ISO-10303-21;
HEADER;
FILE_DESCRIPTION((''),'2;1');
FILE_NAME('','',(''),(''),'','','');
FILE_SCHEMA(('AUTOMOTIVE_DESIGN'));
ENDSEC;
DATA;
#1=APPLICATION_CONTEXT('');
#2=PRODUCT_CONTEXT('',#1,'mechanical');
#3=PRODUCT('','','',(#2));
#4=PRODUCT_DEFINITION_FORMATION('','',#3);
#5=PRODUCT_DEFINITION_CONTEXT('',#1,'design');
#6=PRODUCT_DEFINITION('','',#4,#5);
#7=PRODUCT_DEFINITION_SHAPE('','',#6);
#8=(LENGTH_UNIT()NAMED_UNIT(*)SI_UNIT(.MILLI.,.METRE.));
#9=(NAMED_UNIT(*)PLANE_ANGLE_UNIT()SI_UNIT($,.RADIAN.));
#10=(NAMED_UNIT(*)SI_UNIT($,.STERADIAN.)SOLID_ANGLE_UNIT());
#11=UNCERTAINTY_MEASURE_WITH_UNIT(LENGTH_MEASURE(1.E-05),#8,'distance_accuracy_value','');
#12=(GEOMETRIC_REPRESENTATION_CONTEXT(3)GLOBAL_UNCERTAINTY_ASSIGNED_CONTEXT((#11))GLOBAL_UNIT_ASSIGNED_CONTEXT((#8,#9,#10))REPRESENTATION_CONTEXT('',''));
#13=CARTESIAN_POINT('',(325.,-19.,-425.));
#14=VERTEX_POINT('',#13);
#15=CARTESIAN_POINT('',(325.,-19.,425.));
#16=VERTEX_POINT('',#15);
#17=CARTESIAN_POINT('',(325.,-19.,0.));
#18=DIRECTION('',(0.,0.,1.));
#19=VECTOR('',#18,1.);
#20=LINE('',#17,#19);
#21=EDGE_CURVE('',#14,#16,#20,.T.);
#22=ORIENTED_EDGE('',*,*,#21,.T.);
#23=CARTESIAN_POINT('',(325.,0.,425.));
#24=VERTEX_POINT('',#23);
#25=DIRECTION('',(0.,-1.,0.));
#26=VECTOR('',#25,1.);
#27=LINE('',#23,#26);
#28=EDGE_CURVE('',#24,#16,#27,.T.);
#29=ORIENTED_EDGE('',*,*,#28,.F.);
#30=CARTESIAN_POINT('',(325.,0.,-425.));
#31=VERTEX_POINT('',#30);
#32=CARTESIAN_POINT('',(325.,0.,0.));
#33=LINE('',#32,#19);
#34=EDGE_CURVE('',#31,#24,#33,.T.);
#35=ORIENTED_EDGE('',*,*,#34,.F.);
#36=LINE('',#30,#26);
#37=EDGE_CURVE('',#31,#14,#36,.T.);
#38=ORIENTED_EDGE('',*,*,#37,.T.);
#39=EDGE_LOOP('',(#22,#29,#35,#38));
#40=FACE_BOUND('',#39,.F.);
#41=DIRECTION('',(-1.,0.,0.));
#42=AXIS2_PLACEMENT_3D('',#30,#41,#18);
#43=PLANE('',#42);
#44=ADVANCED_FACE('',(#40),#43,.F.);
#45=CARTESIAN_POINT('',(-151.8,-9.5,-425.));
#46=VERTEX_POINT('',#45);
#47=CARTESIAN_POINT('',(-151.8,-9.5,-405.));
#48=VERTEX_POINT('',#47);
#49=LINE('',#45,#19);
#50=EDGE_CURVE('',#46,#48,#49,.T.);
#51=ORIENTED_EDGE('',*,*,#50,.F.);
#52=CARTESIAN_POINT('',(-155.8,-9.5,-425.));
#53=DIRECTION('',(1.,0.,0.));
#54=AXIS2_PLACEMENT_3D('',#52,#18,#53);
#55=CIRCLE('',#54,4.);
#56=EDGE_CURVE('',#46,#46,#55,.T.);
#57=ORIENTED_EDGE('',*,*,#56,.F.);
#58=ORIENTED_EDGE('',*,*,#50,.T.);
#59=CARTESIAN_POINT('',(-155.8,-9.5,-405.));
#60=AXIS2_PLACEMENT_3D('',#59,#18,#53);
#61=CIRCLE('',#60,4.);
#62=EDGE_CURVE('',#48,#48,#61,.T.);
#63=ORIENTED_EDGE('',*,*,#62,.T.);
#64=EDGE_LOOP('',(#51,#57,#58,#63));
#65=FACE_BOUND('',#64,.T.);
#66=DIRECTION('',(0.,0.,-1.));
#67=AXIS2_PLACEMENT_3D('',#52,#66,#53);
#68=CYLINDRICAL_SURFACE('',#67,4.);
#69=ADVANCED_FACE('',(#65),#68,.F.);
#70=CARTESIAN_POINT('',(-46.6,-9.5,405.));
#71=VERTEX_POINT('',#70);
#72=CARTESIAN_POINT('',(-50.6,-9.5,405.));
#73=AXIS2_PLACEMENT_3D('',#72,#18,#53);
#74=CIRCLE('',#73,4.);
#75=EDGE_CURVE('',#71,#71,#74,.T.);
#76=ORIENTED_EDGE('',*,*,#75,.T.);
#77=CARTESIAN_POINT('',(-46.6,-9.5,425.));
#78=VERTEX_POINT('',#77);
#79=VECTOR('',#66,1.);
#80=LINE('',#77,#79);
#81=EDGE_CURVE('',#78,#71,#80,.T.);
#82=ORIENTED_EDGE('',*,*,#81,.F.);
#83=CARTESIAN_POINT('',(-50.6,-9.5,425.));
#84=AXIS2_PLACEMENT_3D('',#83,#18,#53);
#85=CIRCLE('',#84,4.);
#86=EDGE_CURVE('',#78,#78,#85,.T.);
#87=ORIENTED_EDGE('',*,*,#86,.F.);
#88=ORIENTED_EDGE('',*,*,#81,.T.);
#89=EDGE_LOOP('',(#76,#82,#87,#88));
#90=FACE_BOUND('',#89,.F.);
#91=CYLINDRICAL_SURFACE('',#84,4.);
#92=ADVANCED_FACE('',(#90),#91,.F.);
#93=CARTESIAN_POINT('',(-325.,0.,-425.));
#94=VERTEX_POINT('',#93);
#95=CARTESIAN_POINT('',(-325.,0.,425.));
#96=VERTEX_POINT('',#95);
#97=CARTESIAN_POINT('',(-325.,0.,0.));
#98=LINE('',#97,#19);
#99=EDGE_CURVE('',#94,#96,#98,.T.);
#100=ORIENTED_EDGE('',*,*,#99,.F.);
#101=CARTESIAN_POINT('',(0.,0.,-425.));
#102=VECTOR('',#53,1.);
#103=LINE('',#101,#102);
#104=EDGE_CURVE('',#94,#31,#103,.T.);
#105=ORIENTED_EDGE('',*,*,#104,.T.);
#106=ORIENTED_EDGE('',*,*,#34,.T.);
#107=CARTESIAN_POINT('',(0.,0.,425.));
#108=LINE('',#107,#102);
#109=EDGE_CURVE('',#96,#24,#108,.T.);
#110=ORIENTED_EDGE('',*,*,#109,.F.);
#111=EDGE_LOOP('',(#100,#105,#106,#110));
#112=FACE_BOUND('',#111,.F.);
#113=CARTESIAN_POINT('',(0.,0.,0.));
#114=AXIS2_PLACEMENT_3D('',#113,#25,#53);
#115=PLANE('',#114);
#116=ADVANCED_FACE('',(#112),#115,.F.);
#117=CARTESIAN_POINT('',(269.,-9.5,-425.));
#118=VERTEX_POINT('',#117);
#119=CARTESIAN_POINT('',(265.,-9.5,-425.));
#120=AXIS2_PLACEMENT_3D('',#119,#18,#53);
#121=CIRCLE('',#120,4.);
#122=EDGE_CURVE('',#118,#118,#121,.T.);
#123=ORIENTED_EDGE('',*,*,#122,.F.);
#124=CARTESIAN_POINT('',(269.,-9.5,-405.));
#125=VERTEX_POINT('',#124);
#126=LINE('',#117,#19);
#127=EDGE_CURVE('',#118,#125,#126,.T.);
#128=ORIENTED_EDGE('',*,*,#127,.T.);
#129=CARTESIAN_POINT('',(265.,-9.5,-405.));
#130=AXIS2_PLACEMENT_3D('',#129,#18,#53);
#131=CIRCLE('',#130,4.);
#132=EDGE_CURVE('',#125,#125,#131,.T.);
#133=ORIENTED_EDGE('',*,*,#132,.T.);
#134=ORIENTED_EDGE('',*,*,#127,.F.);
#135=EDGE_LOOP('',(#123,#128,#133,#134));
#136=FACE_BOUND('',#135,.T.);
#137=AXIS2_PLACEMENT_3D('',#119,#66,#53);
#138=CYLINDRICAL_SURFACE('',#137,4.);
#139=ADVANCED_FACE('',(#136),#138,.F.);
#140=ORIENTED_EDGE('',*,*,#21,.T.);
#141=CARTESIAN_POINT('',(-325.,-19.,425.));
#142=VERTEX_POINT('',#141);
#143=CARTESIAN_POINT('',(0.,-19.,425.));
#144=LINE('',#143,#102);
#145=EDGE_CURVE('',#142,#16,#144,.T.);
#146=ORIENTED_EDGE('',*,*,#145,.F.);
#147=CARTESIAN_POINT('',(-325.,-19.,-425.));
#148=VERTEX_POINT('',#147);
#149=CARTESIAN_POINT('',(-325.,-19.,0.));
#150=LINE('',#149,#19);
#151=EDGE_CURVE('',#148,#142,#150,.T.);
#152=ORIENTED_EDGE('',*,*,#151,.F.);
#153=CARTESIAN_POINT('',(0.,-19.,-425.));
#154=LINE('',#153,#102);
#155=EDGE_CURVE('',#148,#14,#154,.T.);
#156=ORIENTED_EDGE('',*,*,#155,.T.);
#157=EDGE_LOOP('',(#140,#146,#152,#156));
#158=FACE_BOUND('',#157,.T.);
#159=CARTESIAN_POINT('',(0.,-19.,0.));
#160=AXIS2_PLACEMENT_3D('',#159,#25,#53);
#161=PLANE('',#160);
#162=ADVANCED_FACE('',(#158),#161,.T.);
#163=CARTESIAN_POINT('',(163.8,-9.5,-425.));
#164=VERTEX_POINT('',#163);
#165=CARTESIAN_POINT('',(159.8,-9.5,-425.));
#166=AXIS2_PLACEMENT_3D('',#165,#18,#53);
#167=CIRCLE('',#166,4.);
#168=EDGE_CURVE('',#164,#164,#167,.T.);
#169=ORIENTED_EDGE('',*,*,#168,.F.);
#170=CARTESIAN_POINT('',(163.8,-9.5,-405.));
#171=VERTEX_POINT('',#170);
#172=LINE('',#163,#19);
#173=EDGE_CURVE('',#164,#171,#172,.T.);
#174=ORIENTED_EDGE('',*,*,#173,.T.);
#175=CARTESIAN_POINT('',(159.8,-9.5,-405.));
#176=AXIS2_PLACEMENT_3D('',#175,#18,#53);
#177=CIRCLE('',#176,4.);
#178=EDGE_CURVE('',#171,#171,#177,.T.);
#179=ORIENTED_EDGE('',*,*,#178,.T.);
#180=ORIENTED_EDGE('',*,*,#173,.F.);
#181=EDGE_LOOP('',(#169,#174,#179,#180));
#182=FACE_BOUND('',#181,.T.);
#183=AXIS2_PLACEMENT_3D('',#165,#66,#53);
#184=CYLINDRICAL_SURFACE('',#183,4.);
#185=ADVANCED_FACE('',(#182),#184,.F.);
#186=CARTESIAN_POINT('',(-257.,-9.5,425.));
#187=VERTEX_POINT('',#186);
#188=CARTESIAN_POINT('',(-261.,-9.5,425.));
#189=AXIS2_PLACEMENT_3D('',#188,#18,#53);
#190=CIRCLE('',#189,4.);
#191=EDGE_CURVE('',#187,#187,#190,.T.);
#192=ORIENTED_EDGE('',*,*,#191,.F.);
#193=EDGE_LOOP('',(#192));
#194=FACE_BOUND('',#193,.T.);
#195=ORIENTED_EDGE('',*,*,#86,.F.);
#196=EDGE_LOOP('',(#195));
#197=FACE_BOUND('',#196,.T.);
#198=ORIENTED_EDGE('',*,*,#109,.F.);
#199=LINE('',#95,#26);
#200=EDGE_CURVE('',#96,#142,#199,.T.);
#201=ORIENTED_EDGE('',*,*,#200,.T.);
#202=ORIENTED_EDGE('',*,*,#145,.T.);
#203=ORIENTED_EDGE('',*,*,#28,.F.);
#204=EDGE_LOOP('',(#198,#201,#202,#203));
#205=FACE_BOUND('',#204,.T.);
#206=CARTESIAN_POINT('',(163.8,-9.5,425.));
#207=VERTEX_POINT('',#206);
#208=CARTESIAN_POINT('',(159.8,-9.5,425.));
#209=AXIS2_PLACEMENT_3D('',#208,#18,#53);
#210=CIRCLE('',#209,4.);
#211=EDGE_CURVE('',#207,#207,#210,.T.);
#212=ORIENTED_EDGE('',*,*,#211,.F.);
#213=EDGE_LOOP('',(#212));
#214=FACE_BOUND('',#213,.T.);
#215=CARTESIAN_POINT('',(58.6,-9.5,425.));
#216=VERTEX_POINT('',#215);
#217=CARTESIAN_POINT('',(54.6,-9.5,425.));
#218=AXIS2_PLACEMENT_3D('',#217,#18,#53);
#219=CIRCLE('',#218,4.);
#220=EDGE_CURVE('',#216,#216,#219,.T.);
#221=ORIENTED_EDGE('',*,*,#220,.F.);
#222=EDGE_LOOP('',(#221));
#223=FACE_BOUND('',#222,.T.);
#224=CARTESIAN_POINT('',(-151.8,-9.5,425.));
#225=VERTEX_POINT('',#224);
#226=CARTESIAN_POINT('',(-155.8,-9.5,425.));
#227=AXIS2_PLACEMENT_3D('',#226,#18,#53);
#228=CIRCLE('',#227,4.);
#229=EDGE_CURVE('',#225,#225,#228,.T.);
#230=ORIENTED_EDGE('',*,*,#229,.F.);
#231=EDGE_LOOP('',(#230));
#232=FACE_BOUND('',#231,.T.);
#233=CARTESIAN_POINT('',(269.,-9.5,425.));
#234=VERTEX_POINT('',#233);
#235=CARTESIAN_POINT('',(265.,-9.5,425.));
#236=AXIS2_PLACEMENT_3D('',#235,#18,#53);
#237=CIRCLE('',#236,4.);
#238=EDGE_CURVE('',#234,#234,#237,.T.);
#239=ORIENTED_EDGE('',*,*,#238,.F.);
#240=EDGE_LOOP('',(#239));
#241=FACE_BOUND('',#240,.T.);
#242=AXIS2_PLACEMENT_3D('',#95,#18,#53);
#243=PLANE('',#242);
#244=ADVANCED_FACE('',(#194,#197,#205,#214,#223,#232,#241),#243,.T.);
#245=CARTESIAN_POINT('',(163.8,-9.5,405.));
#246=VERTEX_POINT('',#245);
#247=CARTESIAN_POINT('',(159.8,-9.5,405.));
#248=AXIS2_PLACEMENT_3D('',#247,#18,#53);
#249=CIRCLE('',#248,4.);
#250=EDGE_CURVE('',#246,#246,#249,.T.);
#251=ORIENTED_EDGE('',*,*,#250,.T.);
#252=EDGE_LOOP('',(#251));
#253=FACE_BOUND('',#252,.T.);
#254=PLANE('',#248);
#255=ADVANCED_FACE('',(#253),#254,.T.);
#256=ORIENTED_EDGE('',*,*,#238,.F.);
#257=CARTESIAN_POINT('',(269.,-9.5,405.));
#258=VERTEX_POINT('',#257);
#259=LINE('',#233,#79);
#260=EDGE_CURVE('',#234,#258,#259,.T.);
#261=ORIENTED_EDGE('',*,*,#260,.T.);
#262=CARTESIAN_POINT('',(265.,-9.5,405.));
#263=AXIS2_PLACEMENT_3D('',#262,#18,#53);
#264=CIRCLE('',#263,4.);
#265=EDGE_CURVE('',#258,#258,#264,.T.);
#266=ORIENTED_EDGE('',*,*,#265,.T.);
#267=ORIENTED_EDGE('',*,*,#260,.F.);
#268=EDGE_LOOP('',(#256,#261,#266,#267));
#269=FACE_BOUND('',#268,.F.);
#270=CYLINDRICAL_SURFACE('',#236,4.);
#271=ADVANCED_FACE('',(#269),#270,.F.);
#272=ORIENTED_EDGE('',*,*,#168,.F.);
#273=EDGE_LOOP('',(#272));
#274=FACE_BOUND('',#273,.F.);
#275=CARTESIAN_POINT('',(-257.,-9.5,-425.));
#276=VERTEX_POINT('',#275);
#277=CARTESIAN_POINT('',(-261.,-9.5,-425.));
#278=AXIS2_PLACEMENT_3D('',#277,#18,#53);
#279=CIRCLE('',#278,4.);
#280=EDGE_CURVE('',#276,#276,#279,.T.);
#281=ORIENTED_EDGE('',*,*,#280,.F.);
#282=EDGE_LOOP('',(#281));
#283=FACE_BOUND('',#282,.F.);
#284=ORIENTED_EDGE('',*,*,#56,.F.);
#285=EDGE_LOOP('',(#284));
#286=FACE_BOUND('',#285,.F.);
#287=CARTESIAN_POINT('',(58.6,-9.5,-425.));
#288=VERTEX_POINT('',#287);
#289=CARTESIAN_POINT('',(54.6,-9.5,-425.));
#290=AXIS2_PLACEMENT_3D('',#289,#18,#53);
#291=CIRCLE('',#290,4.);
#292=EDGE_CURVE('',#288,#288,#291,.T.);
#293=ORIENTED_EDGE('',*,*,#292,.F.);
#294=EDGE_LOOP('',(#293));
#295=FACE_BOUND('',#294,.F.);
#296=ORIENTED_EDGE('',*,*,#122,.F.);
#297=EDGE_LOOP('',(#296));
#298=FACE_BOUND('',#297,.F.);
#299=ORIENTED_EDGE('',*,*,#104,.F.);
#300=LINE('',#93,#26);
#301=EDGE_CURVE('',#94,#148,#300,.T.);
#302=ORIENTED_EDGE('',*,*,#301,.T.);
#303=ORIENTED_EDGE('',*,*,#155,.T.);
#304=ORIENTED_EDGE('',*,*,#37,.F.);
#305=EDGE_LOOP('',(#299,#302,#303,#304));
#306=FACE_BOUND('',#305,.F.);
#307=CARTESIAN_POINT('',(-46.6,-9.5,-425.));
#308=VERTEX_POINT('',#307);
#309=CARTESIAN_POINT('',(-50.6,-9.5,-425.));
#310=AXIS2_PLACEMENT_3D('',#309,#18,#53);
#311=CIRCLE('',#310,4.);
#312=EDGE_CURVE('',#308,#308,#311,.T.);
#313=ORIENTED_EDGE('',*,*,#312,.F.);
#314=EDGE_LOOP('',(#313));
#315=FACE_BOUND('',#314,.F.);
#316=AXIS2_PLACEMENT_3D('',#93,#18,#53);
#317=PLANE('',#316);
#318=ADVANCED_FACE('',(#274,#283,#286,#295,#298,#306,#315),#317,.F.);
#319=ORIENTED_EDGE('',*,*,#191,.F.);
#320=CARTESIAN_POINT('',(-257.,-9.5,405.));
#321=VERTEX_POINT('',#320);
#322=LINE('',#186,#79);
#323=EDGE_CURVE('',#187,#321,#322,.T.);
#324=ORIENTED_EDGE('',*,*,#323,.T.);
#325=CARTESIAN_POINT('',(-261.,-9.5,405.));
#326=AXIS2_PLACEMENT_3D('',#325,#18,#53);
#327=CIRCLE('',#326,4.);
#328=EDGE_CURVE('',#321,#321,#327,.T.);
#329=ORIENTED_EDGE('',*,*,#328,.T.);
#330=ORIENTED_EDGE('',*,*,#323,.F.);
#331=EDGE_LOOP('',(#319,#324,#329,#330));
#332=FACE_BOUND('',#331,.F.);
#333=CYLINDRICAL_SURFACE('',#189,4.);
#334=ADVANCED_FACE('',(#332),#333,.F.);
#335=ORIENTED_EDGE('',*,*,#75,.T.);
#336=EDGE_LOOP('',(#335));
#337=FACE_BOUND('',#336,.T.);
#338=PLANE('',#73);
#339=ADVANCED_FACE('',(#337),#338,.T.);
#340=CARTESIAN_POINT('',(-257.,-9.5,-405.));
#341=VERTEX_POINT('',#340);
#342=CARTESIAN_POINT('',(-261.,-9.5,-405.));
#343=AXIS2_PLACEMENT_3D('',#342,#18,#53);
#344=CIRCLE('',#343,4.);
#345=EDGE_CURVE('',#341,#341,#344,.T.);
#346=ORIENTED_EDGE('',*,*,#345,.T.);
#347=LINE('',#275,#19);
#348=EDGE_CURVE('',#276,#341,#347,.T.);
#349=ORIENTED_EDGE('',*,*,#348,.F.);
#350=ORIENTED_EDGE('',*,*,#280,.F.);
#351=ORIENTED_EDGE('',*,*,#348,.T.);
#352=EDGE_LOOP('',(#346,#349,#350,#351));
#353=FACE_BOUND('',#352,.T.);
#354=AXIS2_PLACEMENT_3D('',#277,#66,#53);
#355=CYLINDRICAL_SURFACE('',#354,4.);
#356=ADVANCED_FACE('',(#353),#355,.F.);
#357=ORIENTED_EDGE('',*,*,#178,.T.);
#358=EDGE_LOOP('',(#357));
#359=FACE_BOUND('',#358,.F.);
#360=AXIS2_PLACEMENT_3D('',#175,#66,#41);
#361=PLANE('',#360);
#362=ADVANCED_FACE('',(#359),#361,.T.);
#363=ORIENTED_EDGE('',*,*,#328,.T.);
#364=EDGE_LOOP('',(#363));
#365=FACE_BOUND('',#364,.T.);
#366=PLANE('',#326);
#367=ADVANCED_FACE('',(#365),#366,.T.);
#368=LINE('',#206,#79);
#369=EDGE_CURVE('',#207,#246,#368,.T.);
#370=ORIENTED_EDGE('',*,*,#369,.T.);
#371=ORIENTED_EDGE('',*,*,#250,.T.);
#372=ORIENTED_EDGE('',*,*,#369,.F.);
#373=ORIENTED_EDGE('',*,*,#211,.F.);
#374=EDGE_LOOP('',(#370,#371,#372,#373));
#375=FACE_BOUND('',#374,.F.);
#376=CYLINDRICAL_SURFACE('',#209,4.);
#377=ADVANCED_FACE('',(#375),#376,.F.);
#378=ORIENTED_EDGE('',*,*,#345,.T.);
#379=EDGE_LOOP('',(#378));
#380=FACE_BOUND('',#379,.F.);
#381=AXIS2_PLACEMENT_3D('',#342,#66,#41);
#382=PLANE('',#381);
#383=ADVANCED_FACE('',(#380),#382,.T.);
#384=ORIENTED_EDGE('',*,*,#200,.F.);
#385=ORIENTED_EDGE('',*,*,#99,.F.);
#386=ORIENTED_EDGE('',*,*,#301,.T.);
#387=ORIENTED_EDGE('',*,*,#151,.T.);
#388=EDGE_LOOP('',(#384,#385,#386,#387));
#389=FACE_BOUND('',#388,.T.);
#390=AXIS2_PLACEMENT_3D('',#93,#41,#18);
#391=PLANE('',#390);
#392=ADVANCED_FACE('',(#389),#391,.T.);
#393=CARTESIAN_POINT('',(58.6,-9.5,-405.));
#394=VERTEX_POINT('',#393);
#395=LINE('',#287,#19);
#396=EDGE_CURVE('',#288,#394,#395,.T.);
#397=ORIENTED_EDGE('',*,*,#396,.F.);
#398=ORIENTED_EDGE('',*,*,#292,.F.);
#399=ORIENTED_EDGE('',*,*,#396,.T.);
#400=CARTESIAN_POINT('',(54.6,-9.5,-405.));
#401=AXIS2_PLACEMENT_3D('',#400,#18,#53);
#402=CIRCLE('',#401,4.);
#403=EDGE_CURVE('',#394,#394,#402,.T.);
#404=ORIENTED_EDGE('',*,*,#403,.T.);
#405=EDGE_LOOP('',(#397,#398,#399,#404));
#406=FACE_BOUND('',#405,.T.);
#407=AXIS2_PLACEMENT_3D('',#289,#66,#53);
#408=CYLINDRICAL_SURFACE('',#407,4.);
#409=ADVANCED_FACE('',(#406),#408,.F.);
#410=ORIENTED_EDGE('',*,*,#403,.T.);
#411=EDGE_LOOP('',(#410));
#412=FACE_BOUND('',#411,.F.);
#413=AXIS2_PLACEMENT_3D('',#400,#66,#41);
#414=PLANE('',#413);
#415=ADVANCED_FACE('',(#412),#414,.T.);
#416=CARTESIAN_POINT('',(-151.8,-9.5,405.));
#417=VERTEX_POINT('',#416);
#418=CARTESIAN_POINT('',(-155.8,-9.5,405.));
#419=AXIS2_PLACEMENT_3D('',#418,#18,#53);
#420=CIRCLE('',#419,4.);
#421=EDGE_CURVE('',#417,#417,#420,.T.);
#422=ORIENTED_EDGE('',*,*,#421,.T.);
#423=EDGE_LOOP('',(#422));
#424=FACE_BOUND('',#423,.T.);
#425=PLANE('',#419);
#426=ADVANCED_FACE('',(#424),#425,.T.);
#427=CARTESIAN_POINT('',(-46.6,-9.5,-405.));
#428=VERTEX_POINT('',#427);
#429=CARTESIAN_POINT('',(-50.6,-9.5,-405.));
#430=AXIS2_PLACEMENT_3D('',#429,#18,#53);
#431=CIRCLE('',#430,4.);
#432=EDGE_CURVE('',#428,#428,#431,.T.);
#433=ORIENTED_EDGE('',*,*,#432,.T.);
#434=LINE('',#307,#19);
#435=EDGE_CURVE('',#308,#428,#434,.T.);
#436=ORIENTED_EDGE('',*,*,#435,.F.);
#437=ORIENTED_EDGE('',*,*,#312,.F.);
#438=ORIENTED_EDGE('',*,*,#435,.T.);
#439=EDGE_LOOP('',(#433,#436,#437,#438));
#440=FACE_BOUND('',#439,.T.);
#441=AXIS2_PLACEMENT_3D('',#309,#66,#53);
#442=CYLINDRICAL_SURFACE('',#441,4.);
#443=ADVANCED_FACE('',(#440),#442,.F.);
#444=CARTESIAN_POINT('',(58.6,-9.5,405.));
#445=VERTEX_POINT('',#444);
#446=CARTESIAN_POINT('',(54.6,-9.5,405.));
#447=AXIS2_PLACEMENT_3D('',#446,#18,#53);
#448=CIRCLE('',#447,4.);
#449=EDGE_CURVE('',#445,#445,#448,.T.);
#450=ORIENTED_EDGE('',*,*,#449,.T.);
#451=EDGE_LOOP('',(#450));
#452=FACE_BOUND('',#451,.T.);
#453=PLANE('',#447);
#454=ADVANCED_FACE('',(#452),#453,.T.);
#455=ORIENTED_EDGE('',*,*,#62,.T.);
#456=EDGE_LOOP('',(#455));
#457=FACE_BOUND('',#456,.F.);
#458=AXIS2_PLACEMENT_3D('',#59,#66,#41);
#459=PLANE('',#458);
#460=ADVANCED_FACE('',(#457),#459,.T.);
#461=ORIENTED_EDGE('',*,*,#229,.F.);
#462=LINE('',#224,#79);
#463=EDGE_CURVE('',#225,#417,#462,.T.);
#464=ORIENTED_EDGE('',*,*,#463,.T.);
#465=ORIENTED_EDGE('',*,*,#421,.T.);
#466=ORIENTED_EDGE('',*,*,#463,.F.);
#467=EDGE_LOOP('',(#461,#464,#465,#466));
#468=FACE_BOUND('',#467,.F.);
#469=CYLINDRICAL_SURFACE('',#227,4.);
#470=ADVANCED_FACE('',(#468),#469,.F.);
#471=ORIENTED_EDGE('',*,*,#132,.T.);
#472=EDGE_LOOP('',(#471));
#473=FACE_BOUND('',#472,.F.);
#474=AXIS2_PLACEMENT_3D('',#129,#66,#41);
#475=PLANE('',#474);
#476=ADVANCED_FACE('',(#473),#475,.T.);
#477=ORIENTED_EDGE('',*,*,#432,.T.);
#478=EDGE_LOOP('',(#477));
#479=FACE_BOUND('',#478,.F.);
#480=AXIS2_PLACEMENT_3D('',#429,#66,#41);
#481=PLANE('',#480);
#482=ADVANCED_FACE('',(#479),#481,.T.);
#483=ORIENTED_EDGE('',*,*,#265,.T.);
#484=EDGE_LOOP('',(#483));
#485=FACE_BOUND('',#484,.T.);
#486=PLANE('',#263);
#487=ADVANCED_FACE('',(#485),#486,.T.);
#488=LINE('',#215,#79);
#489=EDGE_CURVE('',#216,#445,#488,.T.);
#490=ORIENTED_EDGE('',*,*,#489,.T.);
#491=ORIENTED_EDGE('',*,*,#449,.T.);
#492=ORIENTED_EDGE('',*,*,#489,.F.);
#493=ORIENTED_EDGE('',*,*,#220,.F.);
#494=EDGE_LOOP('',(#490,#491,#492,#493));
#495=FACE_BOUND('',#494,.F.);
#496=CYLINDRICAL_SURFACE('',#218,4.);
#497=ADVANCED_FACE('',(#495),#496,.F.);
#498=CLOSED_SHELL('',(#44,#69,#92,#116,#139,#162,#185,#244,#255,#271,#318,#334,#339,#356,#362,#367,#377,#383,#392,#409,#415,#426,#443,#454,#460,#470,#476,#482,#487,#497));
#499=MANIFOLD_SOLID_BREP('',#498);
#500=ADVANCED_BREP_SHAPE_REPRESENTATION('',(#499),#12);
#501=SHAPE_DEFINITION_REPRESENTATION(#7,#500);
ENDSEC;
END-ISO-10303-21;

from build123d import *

# Parameters (mm, degrees)
F0_W     = 650
F0_H     = 850
F1_DEPTH = 19
F2_R     = 4
F3_DEPTH = 20


# Not quite as in the source:
# - a pattern or mirror of a feature is missing from the dataset's text; its kind, count and spacing are read off the source's solid


with BuildPart() as f1:
    # F0 (on Front) → F1 (new body)
    with BuildSketch(Plane.XZ):
        Rectangle(F0_W, F0_H)
    extrude(amount=F1_DEPTH)

    # F2 (on face) → F3 (cut)
    with BuildSketch(Plane.XY.offset(425)):
        with Locations((265, -9.5)):
            Circle(F2_R)
        with Locations((159.8, -9.5)):
            Circle(F2_R)
        with Locations((54.6, -9.5)):
            Circle(F2_R)
        with Locations((-50.6, -9.5)):
            Circle(F2_R)
        with Locations((-155.8, -9.5)):
            Circle(F2_R)
        with Locations((-261, -9.5)):
            Circle(F2_R)
    f3 = extrude(amount=-F3_DEPTH, mode=Mode.SUBTRACT)

    # F3_copies: F3 across plane
    add(f3.mirror(Plane(origin=(0, 0, 0), x_dir=(-1, 0, 0), z_dir=(0, 0, -1))), mode=Mode.SUBTRACT)


solid = f1.part
